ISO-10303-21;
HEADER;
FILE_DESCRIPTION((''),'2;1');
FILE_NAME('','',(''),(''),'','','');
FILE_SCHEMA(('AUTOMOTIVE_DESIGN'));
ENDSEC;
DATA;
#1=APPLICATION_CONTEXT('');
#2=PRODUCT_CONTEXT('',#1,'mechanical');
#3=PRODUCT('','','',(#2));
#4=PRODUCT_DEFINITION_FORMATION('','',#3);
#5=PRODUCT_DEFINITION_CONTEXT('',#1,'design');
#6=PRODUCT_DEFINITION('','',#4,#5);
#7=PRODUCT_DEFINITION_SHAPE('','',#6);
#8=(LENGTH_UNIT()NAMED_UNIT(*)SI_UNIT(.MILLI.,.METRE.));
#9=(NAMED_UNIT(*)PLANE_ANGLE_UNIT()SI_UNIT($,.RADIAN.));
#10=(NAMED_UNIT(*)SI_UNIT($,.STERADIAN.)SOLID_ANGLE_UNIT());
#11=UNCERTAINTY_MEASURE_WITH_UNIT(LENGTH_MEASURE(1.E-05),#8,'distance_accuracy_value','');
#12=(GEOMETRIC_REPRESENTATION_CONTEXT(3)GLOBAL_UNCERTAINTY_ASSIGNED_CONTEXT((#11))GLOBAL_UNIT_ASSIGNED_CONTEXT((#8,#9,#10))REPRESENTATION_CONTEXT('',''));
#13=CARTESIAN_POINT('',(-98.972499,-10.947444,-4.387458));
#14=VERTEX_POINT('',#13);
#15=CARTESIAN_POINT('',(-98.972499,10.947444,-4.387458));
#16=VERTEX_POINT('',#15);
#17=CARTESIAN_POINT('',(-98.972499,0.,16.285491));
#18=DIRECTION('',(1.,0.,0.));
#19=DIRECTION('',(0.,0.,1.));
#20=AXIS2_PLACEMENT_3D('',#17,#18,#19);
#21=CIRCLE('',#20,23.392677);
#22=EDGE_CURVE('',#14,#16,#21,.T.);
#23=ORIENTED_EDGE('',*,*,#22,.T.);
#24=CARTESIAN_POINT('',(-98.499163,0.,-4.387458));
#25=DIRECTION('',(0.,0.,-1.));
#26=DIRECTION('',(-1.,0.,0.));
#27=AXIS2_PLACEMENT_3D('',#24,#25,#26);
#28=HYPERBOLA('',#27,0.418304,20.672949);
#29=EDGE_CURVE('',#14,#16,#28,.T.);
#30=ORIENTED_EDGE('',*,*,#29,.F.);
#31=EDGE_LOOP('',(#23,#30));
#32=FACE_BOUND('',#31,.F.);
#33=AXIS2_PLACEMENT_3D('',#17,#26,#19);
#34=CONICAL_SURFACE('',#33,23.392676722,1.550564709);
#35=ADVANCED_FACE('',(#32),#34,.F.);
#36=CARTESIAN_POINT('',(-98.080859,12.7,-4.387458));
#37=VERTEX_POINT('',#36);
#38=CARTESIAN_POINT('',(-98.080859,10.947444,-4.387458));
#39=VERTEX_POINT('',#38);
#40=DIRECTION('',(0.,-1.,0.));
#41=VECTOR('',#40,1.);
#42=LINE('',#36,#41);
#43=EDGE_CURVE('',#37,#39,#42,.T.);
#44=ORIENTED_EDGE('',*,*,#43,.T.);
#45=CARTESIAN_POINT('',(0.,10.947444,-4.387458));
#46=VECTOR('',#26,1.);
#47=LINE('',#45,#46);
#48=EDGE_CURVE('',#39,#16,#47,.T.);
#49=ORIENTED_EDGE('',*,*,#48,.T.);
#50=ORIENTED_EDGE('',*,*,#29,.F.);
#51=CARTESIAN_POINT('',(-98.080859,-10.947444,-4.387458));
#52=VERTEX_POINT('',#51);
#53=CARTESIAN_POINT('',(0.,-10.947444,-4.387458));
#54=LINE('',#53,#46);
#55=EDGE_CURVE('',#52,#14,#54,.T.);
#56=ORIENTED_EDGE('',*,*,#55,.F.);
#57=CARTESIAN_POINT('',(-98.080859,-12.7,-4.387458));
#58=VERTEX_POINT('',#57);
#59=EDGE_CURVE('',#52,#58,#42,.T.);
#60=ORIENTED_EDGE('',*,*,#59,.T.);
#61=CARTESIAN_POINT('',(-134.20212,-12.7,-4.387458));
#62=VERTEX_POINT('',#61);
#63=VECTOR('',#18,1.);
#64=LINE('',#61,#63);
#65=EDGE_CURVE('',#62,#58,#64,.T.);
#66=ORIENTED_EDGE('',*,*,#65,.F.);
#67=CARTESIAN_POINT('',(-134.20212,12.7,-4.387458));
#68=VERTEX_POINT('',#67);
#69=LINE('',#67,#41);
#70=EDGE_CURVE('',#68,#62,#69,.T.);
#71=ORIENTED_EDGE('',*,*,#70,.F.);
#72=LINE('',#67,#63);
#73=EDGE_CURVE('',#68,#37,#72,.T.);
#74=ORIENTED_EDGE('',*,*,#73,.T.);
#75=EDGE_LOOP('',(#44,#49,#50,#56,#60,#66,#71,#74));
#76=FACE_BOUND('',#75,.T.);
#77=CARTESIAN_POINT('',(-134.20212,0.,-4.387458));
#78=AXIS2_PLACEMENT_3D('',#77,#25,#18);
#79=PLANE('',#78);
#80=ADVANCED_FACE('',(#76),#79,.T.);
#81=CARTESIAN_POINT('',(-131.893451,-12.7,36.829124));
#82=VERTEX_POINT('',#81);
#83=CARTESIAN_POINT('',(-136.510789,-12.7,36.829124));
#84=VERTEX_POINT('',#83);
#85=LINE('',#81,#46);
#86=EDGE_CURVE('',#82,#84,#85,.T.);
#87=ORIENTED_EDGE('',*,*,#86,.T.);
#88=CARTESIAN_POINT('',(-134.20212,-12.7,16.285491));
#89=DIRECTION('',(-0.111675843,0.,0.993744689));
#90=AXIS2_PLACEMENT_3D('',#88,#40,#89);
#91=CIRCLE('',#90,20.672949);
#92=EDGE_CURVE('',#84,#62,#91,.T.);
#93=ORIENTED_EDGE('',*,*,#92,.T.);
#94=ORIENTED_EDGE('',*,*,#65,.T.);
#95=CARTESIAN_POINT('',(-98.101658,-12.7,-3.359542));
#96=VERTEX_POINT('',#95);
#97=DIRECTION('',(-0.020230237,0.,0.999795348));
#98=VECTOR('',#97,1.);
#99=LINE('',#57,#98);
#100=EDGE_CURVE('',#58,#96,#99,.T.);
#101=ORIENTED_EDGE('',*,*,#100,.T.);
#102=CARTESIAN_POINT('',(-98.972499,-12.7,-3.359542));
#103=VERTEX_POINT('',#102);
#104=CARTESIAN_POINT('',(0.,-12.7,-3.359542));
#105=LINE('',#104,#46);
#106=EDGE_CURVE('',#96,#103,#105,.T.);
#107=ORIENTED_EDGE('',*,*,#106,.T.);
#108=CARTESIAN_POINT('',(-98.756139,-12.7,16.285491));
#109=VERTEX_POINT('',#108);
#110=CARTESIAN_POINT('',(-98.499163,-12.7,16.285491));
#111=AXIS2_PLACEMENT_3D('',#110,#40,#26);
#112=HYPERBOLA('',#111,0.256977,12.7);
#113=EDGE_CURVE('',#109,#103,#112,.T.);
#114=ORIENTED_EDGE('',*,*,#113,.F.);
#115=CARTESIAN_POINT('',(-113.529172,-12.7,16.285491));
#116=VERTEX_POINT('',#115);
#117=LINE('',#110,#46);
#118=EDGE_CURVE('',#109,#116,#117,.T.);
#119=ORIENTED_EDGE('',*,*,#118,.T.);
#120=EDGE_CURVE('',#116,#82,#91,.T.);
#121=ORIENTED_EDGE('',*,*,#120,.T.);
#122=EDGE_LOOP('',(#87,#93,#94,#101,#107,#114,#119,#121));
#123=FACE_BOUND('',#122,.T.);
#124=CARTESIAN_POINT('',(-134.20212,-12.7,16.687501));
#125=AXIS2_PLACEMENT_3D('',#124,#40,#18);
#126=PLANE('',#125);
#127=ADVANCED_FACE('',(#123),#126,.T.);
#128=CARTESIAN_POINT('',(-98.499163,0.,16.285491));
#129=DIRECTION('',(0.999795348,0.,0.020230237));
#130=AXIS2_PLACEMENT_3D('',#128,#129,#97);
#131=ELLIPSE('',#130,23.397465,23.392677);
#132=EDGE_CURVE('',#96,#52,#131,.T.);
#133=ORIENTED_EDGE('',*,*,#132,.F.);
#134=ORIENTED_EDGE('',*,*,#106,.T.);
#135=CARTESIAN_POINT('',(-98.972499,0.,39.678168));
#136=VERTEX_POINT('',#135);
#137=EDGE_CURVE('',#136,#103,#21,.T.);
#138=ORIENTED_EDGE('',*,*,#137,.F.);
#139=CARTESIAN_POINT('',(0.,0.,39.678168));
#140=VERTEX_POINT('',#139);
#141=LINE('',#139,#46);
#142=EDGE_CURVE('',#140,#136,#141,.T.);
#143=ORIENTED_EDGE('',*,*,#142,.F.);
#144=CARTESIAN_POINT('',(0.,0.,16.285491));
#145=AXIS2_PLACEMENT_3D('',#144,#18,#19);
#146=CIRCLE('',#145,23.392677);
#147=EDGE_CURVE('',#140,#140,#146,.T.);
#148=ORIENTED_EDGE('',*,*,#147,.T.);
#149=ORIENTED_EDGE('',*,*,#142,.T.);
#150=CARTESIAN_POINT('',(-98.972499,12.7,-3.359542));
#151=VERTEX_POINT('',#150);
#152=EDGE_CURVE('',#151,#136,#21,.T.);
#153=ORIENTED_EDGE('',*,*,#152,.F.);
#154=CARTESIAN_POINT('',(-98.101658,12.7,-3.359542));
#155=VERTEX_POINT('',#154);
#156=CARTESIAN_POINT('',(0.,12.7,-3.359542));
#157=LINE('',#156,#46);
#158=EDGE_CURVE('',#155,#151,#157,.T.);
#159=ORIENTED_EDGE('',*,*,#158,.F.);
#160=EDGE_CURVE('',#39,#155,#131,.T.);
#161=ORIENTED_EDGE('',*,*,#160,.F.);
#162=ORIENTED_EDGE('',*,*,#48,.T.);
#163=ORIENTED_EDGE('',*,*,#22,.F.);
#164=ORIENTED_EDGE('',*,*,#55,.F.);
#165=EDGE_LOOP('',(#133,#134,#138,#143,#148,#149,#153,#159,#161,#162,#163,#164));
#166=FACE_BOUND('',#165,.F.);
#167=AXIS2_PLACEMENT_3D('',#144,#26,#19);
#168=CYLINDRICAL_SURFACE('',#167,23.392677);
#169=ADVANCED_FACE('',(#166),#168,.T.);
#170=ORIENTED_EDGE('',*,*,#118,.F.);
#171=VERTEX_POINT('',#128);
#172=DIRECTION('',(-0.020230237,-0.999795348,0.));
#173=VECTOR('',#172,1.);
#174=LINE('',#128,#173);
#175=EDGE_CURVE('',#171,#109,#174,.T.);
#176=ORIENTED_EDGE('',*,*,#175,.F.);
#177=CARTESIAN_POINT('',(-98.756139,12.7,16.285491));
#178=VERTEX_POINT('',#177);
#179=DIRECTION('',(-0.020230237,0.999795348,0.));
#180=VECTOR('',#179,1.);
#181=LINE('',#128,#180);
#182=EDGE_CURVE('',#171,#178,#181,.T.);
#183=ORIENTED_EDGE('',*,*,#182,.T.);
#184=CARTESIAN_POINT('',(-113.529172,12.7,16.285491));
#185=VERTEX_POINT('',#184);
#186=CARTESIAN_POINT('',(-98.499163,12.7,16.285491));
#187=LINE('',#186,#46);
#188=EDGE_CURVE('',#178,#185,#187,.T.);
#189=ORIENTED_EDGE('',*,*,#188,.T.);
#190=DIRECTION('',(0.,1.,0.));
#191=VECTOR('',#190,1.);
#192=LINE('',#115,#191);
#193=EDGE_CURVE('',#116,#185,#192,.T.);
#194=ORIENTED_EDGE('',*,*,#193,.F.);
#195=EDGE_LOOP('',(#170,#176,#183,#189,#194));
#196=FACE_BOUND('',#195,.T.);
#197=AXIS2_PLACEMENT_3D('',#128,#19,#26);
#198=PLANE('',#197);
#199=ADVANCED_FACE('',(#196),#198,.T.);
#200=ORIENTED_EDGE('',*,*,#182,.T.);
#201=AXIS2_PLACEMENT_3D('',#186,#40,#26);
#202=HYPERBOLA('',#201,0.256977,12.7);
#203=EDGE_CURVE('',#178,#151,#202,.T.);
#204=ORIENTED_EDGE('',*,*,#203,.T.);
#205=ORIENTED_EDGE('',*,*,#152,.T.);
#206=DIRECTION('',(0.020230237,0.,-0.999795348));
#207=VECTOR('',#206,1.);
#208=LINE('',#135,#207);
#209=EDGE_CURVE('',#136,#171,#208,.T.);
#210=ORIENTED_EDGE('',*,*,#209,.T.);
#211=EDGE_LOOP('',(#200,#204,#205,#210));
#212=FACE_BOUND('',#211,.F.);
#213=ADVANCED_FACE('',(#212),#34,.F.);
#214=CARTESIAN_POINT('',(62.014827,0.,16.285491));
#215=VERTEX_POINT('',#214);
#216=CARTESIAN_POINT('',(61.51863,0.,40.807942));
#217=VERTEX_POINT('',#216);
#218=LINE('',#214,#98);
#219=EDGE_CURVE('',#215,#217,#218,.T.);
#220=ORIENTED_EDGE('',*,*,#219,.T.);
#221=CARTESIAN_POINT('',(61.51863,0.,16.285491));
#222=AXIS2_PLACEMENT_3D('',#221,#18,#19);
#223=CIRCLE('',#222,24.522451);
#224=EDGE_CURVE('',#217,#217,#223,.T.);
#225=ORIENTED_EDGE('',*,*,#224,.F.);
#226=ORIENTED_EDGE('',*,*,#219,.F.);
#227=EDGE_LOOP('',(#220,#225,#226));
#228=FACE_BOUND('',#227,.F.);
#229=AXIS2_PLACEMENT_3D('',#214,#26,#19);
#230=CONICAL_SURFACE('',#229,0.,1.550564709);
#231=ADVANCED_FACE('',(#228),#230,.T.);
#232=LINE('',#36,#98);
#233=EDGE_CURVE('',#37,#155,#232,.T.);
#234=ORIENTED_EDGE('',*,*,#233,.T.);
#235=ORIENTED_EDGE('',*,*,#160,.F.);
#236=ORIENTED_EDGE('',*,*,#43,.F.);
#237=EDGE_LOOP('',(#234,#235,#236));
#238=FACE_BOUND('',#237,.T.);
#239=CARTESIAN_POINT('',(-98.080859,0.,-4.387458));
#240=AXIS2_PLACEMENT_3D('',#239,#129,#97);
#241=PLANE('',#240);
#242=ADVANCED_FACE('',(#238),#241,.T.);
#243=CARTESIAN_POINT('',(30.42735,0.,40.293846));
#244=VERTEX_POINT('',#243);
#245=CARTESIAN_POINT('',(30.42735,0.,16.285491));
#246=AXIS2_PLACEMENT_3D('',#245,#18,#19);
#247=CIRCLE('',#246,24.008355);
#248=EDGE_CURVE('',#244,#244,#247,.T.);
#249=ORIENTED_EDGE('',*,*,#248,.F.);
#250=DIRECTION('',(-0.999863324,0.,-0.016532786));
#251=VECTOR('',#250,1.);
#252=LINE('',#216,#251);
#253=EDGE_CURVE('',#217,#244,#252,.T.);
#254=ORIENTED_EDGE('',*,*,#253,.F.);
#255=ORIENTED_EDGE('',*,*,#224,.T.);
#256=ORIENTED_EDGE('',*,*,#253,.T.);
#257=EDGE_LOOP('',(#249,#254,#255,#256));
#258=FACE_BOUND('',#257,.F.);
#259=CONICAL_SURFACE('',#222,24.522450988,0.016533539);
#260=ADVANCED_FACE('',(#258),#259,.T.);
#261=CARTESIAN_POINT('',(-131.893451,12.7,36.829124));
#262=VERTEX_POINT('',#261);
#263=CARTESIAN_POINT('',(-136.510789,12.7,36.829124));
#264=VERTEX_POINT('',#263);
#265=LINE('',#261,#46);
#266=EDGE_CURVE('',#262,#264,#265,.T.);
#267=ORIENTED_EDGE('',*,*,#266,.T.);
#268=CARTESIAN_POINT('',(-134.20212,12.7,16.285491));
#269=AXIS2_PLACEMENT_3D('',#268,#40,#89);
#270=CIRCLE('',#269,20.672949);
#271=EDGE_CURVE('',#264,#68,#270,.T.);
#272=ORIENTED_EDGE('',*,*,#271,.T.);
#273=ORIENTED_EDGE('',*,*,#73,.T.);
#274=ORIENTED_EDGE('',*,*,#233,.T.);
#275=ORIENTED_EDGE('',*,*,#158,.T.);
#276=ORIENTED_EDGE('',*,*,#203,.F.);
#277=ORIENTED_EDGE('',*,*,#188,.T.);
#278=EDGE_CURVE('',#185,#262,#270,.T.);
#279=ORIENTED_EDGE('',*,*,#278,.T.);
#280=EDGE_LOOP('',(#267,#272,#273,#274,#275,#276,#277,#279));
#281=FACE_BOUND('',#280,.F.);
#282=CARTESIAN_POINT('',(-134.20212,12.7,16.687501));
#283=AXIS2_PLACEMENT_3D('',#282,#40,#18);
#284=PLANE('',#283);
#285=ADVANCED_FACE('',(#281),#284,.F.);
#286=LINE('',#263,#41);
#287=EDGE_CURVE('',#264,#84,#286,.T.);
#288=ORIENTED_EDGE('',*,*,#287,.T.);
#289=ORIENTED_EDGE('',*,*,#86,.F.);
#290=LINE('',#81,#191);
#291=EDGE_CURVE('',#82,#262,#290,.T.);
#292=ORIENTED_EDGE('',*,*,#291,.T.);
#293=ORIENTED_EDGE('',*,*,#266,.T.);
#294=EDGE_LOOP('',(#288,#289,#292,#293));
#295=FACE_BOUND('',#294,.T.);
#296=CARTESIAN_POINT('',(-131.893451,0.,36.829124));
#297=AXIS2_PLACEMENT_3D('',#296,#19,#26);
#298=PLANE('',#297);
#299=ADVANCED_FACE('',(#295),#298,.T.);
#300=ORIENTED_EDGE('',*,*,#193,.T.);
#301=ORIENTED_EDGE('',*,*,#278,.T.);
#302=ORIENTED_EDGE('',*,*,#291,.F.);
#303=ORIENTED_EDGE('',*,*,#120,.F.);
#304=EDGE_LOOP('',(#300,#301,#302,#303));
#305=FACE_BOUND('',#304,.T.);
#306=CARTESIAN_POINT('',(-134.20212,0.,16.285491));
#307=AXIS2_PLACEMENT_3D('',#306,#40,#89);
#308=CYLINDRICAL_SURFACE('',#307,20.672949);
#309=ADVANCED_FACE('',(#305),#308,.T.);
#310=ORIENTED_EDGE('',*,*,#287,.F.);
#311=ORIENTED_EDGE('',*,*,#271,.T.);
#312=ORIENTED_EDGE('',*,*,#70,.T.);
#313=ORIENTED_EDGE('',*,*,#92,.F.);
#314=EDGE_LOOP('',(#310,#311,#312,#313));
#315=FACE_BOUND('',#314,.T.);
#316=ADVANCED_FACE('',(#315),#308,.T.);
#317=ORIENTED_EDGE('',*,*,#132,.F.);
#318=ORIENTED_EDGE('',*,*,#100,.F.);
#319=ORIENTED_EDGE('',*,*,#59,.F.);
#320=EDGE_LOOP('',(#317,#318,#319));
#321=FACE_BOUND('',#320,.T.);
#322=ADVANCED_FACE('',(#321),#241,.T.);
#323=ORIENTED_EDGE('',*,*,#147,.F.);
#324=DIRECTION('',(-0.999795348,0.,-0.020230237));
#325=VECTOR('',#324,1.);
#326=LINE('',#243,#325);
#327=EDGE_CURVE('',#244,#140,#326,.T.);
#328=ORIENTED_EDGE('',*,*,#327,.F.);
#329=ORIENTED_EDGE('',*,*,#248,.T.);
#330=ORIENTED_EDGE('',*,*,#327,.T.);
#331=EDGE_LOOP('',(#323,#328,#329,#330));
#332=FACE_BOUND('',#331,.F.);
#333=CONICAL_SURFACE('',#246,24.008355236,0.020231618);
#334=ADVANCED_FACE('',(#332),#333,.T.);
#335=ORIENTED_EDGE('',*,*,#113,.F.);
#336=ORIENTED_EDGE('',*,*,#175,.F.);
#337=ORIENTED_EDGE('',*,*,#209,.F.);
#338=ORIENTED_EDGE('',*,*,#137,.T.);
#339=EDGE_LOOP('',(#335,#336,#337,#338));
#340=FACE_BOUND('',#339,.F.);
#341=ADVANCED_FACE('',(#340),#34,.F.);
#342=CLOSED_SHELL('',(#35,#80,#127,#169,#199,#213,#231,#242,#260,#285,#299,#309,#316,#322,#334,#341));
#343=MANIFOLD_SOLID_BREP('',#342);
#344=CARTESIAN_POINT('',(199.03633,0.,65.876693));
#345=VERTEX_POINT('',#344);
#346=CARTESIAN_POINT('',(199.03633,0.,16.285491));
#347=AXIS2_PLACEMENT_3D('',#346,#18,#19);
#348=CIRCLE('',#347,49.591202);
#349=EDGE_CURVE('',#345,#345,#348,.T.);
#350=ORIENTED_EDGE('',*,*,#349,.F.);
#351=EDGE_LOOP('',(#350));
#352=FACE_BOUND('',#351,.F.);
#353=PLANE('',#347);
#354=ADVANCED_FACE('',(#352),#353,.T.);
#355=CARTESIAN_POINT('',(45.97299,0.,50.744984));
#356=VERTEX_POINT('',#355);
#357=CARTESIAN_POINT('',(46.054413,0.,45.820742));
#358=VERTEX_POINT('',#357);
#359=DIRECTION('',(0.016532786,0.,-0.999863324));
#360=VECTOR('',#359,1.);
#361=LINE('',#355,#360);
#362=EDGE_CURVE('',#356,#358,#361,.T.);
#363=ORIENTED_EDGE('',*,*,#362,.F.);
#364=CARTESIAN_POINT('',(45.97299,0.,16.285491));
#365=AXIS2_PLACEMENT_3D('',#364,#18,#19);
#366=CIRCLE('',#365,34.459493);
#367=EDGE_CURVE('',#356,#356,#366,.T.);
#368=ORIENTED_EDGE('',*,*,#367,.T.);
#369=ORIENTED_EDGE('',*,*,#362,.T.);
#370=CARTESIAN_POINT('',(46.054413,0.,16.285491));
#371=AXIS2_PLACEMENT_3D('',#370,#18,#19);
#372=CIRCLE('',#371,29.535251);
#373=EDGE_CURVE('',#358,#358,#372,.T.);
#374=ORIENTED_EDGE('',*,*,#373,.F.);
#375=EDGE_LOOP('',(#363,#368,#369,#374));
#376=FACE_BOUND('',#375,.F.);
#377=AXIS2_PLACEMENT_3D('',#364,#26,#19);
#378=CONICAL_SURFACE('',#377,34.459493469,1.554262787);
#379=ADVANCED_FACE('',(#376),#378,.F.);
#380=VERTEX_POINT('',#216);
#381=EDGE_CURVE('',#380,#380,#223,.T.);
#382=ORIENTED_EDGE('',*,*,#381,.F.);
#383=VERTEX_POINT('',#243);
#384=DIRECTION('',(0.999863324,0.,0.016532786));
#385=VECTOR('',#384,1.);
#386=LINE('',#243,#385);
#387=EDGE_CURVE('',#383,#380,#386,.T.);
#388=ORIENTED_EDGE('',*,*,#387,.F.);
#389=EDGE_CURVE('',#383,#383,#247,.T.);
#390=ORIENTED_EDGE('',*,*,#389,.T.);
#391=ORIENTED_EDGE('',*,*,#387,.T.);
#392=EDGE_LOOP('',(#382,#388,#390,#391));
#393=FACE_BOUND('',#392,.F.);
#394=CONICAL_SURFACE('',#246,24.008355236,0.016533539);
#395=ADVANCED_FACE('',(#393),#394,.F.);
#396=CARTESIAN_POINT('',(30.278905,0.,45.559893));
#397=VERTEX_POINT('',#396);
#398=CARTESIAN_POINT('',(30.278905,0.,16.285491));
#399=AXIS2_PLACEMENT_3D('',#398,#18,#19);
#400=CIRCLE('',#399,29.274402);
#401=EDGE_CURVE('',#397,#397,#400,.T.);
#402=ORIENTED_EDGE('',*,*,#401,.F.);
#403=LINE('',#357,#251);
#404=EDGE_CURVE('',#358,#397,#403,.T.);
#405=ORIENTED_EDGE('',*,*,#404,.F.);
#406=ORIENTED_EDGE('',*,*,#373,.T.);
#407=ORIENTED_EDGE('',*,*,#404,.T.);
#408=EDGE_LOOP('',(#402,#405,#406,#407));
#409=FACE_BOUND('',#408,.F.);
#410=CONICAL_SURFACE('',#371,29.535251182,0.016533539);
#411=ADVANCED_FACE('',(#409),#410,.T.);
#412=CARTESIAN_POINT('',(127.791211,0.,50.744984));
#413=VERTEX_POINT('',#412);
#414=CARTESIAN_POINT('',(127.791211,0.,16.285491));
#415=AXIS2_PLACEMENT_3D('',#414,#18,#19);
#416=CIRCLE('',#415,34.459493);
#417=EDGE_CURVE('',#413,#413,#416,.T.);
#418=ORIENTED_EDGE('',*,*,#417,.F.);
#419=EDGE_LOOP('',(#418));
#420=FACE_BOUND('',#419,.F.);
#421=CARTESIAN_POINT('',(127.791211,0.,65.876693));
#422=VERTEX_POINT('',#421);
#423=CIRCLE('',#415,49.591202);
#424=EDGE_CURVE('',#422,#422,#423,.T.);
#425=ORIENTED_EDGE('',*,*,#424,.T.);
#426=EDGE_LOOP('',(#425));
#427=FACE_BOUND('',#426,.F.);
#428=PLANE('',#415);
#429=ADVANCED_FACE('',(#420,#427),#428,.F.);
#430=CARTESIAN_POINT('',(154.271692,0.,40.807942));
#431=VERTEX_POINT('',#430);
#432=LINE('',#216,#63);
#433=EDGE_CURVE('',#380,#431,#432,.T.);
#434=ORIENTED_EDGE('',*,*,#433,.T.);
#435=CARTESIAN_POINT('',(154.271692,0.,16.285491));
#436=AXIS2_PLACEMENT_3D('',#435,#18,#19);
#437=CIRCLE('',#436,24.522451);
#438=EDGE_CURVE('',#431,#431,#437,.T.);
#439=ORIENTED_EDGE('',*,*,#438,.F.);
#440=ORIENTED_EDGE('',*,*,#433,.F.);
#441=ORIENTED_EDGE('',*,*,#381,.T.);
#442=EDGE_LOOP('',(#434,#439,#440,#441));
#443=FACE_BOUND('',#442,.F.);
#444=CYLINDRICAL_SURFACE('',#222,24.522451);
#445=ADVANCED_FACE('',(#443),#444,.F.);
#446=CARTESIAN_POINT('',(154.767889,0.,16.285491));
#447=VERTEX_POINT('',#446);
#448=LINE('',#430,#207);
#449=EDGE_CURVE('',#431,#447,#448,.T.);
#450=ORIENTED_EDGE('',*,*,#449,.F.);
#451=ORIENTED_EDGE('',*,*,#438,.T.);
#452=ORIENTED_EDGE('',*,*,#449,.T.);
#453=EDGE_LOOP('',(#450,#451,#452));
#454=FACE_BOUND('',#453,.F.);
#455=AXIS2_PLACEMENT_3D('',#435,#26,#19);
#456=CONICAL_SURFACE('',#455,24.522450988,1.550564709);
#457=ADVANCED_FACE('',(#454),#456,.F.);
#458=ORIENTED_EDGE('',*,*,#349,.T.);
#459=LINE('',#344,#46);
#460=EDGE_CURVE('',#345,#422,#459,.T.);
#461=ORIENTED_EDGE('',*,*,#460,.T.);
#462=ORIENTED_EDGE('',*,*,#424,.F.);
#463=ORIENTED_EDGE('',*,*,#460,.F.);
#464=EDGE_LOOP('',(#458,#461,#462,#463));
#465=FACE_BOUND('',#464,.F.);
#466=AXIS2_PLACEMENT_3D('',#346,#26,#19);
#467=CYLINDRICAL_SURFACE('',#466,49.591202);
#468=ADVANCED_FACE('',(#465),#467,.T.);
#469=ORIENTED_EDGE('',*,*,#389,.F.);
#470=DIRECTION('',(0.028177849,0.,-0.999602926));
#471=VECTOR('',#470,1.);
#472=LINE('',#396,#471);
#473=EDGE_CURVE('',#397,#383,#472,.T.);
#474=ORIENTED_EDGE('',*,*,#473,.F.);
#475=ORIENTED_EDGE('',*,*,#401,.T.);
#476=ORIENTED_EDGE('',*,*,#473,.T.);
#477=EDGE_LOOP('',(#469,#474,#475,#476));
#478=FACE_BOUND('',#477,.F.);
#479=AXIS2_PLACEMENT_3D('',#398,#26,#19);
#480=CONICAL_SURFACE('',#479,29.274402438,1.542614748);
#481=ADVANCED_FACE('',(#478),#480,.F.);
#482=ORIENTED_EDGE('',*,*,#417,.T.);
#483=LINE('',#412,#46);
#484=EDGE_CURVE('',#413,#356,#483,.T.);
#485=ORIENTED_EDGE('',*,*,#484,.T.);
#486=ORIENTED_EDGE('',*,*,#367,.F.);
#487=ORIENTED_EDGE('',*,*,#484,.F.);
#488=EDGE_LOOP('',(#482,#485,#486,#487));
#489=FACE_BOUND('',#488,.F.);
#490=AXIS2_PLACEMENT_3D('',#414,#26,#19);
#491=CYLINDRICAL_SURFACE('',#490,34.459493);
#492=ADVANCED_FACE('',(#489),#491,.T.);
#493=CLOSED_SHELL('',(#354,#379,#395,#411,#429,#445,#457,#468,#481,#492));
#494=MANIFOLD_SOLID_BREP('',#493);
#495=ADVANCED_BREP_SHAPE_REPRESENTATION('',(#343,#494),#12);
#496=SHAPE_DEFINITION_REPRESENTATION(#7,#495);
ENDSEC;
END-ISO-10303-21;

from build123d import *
from build123d import SkipClean  # not in build123d's __all__

# Parameters (mm, degrees)
F3_DEPTH = 12.7


with BuildPart() as f1:
    # F0 (on Front) → F1 (revolve)
    with BuildSketch(Plane.XZ):
        Polygon((30.2789051418, 45.5598932677), (30.4273499666, 40.2938460652), (61.5186302682, 40.8079418176), (154.2716920376, 40.8079418176), (154.7678885906, 16.2854908297), (199.0363299847, 16.2854908297), (199.0363299847, 36.9584394366), (199.0363299847, 65.8766925335), (127.791211009, 65.8766925335), (127.791211009, 50.7449842989), (45.9729901174, 50.7449842989), (46.0544126905, 45.8207420119), align=None)
    revolve(axis=Axis((-33.7930093709, 0, 16.2854908297), (1, 0, 0)))


with BuildPart() as f2:
    # F0 (on Front) → F2 (revolve)
    with BuildSketch(Plane.XZ):
        Polygon((-98.9724991263, 39.6781675518), (-98.4991628533, 16.2854908297), (30.9131441116, 16.2854908297), (30.4273499666, 40.2938460652), (0, 39.6781675518), align=None)
        Polygon((30.4273499666, 40.2938460652), (30.9131441116, 16.2854908297), (62.0148268213, 16.2854908297), (61.5186302682, 40.8079418176), align=None)
    revolve(axis=Axis((-33.7930093709, 0, 16.2854908297), (1, 0, 0)))

    # F0 (on Front) → F3 (join, symmetric)
    with BuildSketch(Plane.XZ):
        with BuildLine():
            Line((-131.8934512444, 36.8291237046), (-136.5107891798, 36.8291237046))
            ThreePointArc((-136.5107891798, 36.8291237046), (-154.8427145679, 15.1293469199), (-134.2021202121, -4.3874577771))
            ThreePointArc((-134.2021202121, -4.3874577771), (-119.5841380651, 1.6675086827), (-113.5291716052, 16.2854908297))
            ThreePointArc((-113.5291716052, 16.2854908297), (-118.7894987767, 30.0630778678), (-131.8934512444, 36.8291237046))
        make_face()
        with BuildLine():
            ThreePointArc((-113.5291716052, 16.2854908297), (-119.5841380651, 1.6675086827), (-134.2021202121, -4.3874577771))
            Line((-134.2021202121, -4.3874577771), (-98.0808585882, -4.3874577771))
            Line((-98.0808585882, -4.3874577771), (-98.4991628533, 16.2854908297))
            Line((-98.4991628533, 16.2854908297), (-113.5291716052, 16.2854908297))
        make_face()
    with SkipClean():  # cleaning this boolean's faces spoils the solid; the shape is the same uncleaned
        extrude(amount=F3_DEPTH, both=True)


solid = Compound([f1.part, f2.part])
